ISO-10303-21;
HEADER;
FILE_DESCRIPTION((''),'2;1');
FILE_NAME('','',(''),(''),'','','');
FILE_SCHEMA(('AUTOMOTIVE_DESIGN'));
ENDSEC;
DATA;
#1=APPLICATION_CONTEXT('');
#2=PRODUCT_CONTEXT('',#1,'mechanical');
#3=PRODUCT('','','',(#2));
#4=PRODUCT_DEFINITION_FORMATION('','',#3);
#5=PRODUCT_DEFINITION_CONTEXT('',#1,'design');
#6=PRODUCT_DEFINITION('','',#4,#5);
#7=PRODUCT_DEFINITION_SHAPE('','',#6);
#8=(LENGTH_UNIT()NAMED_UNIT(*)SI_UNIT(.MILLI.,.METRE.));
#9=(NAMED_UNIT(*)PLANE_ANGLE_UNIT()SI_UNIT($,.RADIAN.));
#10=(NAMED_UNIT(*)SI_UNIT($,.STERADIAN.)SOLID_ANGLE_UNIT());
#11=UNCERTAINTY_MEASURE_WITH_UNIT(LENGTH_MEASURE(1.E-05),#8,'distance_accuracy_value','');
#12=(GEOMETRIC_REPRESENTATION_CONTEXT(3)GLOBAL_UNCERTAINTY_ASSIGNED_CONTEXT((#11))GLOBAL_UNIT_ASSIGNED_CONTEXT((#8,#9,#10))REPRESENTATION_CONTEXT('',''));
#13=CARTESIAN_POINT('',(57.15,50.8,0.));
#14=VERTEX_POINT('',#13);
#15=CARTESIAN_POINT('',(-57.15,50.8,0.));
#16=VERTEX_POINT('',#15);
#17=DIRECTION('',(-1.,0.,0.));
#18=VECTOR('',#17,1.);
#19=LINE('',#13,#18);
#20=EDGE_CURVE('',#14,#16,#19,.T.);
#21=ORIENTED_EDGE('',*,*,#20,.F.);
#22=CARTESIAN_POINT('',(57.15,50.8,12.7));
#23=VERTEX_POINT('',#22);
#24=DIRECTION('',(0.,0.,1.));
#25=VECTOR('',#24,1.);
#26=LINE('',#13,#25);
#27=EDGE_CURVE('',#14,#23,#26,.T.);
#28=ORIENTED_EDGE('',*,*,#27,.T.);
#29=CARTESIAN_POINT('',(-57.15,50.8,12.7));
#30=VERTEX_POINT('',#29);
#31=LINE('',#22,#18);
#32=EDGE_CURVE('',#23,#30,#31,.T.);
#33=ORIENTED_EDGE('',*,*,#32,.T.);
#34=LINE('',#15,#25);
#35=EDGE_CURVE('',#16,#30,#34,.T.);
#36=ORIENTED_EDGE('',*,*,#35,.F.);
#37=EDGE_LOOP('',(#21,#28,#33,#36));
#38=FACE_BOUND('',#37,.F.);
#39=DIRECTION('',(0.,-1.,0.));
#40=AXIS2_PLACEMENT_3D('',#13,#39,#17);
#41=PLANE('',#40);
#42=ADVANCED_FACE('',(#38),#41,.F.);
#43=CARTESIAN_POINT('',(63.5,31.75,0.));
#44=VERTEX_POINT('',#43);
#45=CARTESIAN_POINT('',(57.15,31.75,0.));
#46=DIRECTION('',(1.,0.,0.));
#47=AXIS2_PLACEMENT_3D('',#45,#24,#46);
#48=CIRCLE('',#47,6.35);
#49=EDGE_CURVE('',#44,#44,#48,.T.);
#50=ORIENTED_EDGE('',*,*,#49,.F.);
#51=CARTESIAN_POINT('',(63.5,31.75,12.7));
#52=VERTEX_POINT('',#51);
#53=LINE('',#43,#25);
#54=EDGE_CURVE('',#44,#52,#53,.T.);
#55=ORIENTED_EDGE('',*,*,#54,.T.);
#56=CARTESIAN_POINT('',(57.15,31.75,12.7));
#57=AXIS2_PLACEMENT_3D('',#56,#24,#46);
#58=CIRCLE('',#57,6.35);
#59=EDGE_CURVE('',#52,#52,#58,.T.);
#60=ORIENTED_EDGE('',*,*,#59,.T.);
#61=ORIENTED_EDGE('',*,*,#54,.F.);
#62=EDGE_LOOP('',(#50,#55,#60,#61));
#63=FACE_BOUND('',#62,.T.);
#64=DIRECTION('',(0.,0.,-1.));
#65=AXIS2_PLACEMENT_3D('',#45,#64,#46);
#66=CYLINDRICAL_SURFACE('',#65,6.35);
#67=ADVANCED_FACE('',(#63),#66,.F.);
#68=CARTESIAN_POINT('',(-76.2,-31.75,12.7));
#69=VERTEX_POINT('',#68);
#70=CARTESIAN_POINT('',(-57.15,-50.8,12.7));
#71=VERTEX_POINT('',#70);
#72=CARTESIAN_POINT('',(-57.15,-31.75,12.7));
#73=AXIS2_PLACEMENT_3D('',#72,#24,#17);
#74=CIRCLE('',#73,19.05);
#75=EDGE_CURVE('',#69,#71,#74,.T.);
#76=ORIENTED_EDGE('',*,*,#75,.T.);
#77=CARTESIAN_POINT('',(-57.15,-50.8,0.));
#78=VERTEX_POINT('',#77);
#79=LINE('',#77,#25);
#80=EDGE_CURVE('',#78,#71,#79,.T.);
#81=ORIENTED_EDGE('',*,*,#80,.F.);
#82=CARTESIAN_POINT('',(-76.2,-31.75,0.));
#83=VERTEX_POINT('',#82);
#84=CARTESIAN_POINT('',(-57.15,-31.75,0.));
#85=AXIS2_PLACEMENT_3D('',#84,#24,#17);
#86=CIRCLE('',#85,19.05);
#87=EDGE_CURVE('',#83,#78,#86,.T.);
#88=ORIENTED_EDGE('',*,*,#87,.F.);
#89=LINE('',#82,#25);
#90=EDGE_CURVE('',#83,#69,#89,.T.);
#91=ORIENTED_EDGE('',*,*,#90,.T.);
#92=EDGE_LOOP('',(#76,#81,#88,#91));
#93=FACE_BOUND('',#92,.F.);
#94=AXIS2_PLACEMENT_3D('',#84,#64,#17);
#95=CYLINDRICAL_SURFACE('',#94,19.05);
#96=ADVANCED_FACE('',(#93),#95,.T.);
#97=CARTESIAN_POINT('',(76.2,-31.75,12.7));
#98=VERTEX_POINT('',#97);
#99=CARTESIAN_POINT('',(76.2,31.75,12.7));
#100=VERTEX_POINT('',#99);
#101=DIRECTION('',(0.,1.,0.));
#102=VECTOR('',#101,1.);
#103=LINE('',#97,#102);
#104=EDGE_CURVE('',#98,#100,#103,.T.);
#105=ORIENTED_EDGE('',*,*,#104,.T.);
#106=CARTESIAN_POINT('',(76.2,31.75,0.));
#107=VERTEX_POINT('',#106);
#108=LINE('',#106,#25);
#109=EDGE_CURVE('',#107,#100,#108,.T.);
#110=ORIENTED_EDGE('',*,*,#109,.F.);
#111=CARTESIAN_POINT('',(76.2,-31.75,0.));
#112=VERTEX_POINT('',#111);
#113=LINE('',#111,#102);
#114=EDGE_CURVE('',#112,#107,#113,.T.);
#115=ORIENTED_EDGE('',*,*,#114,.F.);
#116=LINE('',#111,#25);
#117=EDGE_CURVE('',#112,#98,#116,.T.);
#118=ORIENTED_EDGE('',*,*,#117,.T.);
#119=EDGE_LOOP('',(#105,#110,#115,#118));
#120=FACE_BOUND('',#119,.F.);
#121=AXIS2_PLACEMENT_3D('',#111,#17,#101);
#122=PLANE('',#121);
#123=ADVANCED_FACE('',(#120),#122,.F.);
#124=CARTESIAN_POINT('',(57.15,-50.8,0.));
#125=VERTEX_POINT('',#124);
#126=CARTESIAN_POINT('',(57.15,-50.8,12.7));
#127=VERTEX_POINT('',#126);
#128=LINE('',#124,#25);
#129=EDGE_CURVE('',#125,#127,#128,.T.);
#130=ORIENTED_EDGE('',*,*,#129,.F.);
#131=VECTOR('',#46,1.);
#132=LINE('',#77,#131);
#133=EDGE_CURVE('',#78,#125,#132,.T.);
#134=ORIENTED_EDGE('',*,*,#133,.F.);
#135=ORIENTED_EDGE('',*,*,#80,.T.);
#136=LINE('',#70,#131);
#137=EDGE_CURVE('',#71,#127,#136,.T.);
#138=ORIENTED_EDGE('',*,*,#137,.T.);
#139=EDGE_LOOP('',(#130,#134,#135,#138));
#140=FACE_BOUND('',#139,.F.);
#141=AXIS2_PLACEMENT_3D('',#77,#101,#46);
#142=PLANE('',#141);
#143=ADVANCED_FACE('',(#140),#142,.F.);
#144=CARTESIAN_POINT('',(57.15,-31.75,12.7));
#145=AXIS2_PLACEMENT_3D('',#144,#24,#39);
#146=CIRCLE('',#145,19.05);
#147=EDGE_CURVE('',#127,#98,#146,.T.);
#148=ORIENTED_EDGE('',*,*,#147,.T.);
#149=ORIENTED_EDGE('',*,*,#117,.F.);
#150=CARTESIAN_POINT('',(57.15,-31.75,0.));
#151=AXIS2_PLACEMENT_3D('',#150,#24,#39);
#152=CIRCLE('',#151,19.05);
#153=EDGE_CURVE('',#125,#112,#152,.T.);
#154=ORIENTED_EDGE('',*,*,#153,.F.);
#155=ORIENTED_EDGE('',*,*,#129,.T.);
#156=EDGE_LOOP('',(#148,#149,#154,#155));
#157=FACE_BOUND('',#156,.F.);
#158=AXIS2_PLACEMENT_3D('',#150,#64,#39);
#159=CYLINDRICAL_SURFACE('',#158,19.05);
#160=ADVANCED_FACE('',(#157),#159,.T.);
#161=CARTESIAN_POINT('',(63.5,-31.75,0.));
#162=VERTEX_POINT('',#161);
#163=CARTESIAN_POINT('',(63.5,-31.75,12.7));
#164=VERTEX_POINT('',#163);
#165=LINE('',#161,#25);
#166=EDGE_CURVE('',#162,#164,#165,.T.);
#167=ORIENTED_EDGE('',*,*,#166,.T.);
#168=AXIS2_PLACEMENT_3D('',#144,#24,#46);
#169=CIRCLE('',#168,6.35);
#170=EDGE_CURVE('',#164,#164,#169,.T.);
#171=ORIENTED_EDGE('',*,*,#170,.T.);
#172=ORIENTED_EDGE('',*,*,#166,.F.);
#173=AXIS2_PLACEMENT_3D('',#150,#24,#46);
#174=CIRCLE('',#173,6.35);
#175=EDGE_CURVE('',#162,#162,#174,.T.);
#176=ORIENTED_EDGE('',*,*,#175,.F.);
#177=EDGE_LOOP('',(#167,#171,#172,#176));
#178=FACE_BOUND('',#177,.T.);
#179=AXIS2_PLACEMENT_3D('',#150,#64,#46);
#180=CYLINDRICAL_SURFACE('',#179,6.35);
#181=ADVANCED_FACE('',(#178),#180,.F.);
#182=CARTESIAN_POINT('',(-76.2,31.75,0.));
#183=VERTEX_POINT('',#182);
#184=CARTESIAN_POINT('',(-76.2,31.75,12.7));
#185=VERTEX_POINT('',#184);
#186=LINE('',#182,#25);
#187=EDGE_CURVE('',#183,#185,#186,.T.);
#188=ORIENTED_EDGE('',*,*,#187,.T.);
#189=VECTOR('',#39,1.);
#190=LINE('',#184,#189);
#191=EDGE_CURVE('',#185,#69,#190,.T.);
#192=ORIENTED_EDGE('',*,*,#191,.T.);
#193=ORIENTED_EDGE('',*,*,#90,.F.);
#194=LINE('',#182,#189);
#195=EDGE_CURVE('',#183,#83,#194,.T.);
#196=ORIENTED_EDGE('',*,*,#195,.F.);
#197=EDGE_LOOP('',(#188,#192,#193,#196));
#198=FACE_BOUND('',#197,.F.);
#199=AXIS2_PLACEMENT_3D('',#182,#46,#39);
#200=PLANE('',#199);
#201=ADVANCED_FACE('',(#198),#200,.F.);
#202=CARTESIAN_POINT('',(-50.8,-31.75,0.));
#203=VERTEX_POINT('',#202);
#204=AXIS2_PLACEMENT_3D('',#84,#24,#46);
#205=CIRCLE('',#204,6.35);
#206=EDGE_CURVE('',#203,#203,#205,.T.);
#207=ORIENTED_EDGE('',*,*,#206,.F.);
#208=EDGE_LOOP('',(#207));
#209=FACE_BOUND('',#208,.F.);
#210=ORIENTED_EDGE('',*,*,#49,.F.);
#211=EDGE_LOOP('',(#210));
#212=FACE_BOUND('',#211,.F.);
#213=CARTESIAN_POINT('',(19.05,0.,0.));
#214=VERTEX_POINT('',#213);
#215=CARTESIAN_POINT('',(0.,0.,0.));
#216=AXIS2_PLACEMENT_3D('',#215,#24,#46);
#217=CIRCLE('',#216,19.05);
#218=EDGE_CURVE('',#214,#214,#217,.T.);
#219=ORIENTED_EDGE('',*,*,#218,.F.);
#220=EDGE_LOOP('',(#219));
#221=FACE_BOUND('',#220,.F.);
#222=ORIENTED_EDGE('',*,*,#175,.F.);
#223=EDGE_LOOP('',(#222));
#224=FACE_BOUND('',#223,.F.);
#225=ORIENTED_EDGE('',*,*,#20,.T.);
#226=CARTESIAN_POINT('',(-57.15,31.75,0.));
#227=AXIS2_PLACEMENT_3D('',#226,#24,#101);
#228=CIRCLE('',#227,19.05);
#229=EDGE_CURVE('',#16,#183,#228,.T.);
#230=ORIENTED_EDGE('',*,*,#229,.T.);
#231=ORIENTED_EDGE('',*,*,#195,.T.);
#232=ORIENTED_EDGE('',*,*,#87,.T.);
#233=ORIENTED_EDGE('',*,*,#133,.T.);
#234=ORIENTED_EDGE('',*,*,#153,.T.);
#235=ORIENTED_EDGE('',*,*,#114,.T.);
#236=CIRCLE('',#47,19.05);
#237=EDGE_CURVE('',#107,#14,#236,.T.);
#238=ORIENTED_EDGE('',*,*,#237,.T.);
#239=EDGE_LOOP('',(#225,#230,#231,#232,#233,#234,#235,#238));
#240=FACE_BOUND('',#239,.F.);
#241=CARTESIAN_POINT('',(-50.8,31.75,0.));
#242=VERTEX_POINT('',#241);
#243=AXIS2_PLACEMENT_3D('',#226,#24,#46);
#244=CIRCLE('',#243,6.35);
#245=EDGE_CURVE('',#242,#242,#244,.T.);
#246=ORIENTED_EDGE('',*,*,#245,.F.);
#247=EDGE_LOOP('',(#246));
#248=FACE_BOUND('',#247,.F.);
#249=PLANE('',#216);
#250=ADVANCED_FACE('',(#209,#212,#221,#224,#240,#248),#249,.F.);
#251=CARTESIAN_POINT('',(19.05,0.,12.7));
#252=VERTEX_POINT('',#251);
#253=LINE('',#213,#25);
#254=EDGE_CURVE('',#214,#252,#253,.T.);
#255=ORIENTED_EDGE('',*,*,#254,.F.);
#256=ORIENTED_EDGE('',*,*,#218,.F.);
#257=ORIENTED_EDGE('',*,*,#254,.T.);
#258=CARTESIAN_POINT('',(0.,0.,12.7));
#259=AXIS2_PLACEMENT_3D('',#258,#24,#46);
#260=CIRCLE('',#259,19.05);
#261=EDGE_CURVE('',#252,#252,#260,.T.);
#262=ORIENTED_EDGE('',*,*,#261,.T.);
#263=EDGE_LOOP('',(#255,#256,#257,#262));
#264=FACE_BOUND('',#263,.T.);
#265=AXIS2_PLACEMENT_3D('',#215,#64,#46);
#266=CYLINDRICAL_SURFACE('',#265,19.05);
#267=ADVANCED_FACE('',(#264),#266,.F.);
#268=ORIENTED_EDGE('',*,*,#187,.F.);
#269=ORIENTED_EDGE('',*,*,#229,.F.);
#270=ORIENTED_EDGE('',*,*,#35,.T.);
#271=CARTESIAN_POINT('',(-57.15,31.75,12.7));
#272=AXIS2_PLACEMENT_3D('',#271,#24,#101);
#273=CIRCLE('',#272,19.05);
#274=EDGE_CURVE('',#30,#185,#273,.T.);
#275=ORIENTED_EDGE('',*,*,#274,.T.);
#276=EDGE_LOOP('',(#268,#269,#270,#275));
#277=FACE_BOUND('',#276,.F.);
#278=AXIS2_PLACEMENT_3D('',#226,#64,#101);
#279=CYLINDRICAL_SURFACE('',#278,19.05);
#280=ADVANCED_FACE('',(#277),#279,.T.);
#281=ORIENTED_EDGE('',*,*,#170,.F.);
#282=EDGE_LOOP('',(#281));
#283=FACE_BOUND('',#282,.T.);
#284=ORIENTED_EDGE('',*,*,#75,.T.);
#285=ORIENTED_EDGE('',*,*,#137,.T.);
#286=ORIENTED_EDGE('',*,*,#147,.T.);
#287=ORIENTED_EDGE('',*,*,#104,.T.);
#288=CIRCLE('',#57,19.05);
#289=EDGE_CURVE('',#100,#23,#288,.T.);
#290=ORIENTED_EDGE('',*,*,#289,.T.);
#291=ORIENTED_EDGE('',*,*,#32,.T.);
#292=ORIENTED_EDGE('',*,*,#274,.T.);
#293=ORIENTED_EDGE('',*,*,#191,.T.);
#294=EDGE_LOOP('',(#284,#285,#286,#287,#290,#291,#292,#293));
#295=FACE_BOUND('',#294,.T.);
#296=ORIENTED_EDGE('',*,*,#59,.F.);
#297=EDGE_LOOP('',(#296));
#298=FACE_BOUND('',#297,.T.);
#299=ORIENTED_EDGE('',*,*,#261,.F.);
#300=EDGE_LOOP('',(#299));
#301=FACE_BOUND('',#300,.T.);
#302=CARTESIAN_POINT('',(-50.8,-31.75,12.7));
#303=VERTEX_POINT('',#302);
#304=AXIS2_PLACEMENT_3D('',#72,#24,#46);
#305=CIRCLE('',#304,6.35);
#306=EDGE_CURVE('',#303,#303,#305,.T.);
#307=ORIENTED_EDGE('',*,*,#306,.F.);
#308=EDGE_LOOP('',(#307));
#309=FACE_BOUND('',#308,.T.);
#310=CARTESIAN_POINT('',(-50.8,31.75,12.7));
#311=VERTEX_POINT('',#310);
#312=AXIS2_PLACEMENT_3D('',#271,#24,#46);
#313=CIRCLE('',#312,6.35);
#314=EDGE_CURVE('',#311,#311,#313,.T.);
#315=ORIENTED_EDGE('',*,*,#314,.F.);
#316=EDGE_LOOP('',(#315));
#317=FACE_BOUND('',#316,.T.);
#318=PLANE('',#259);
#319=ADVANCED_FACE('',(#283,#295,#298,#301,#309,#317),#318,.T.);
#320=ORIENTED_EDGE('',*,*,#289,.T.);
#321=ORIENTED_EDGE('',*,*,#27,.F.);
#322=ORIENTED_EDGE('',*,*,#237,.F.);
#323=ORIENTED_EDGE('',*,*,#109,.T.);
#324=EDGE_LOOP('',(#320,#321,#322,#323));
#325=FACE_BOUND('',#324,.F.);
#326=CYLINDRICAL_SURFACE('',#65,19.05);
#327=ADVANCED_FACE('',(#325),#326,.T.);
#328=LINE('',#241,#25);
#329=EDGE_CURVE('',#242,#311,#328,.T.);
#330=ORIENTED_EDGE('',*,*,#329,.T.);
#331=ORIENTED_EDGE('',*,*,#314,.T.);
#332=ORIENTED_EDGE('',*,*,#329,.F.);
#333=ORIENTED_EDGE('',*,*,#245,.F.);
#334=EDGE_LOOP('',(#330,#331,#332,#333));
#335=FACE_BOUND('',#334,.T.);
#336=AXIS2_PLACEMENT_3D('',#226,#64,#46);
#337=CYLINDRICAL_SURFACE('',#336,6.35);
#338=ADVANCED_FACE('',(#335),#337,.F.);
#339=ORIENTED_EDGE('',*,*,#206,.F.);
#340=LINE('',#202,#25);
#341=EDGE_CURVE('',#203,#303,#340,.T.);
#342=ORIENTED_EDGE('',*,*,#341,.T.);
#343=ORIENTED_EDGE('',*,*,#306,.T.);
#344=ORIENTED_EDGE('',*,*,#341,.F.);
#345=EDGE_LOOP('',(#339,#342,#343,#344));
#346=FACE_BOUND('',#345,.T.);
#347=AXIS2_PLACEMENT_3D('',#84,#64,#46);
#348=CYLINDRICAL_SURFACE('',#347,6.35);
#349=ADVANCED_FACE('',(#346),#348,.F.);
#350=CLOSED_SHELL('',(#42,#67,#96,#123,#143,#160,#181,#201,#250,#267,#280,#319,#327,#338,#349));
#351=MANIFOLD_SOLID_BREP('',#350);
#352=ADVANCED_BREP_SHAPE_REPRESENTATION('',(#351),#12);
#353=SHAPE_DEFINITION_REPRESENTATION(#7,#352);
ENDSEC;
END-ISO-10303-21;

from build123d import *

# Parameters (mm, degrees)
F0_R     = 6.35
F0_R_2   = 19.05
F1_DEPTH = 12.7


# Not quite as in the source:
# - a feature names something its author has since deleted; it is built from what else it names


with BuildPart() as f1:
    # F0 (on Top) → F1 (new body)
    with BuildSketch(Plane.XY):
        with BuildLine():
            ThreePointArc((76.2, 31.75), (70.6203841816, 45.2203841816), (57.15, 50.8))
            Line((57.15, 50.8), (-57.15, 50.8))
            ThreePointArc((-57.15, 50.8), (-70.6203841816, 45.2203841816), (-76.2, 31.75))
            Line((-76.2, 31.75), (-76.2, -31.75))
            ThreePointArc((-76.2, -31.75), (-70.6203841816, -45.2203841816), (-57.15, -50.8))
            Line((-57.15, -50.8), (57.15, -50.8))
            ThreePointArc((57.15, -50.8), (70.6203841816, -45.2203841816), (76.2, -31.75))
            Line((76.2, -31.75), (76.2, 31.75))
        make_face()
        with Locations((-57.15, -31.75)):
            Circle(F0_R, mode=Mode.SUBTRACT)
        with Locations((57.15, -31.75)):
            Circle(F0_R, mode=Mode.SUBTRACT)
        Circle(F0_R_2, mode=Mode.SUBTRACT)
        with Locations((-57.15, 31.75)):
            Circle(F0_R, mode=Mode.SUBTRACT)
        with Locations((57.15, 31.75)):
            Circle(F0_R, mode=Mode.SUBTRACT)
    extrude(amount=F1_DEPTH)


solid = f1.part
